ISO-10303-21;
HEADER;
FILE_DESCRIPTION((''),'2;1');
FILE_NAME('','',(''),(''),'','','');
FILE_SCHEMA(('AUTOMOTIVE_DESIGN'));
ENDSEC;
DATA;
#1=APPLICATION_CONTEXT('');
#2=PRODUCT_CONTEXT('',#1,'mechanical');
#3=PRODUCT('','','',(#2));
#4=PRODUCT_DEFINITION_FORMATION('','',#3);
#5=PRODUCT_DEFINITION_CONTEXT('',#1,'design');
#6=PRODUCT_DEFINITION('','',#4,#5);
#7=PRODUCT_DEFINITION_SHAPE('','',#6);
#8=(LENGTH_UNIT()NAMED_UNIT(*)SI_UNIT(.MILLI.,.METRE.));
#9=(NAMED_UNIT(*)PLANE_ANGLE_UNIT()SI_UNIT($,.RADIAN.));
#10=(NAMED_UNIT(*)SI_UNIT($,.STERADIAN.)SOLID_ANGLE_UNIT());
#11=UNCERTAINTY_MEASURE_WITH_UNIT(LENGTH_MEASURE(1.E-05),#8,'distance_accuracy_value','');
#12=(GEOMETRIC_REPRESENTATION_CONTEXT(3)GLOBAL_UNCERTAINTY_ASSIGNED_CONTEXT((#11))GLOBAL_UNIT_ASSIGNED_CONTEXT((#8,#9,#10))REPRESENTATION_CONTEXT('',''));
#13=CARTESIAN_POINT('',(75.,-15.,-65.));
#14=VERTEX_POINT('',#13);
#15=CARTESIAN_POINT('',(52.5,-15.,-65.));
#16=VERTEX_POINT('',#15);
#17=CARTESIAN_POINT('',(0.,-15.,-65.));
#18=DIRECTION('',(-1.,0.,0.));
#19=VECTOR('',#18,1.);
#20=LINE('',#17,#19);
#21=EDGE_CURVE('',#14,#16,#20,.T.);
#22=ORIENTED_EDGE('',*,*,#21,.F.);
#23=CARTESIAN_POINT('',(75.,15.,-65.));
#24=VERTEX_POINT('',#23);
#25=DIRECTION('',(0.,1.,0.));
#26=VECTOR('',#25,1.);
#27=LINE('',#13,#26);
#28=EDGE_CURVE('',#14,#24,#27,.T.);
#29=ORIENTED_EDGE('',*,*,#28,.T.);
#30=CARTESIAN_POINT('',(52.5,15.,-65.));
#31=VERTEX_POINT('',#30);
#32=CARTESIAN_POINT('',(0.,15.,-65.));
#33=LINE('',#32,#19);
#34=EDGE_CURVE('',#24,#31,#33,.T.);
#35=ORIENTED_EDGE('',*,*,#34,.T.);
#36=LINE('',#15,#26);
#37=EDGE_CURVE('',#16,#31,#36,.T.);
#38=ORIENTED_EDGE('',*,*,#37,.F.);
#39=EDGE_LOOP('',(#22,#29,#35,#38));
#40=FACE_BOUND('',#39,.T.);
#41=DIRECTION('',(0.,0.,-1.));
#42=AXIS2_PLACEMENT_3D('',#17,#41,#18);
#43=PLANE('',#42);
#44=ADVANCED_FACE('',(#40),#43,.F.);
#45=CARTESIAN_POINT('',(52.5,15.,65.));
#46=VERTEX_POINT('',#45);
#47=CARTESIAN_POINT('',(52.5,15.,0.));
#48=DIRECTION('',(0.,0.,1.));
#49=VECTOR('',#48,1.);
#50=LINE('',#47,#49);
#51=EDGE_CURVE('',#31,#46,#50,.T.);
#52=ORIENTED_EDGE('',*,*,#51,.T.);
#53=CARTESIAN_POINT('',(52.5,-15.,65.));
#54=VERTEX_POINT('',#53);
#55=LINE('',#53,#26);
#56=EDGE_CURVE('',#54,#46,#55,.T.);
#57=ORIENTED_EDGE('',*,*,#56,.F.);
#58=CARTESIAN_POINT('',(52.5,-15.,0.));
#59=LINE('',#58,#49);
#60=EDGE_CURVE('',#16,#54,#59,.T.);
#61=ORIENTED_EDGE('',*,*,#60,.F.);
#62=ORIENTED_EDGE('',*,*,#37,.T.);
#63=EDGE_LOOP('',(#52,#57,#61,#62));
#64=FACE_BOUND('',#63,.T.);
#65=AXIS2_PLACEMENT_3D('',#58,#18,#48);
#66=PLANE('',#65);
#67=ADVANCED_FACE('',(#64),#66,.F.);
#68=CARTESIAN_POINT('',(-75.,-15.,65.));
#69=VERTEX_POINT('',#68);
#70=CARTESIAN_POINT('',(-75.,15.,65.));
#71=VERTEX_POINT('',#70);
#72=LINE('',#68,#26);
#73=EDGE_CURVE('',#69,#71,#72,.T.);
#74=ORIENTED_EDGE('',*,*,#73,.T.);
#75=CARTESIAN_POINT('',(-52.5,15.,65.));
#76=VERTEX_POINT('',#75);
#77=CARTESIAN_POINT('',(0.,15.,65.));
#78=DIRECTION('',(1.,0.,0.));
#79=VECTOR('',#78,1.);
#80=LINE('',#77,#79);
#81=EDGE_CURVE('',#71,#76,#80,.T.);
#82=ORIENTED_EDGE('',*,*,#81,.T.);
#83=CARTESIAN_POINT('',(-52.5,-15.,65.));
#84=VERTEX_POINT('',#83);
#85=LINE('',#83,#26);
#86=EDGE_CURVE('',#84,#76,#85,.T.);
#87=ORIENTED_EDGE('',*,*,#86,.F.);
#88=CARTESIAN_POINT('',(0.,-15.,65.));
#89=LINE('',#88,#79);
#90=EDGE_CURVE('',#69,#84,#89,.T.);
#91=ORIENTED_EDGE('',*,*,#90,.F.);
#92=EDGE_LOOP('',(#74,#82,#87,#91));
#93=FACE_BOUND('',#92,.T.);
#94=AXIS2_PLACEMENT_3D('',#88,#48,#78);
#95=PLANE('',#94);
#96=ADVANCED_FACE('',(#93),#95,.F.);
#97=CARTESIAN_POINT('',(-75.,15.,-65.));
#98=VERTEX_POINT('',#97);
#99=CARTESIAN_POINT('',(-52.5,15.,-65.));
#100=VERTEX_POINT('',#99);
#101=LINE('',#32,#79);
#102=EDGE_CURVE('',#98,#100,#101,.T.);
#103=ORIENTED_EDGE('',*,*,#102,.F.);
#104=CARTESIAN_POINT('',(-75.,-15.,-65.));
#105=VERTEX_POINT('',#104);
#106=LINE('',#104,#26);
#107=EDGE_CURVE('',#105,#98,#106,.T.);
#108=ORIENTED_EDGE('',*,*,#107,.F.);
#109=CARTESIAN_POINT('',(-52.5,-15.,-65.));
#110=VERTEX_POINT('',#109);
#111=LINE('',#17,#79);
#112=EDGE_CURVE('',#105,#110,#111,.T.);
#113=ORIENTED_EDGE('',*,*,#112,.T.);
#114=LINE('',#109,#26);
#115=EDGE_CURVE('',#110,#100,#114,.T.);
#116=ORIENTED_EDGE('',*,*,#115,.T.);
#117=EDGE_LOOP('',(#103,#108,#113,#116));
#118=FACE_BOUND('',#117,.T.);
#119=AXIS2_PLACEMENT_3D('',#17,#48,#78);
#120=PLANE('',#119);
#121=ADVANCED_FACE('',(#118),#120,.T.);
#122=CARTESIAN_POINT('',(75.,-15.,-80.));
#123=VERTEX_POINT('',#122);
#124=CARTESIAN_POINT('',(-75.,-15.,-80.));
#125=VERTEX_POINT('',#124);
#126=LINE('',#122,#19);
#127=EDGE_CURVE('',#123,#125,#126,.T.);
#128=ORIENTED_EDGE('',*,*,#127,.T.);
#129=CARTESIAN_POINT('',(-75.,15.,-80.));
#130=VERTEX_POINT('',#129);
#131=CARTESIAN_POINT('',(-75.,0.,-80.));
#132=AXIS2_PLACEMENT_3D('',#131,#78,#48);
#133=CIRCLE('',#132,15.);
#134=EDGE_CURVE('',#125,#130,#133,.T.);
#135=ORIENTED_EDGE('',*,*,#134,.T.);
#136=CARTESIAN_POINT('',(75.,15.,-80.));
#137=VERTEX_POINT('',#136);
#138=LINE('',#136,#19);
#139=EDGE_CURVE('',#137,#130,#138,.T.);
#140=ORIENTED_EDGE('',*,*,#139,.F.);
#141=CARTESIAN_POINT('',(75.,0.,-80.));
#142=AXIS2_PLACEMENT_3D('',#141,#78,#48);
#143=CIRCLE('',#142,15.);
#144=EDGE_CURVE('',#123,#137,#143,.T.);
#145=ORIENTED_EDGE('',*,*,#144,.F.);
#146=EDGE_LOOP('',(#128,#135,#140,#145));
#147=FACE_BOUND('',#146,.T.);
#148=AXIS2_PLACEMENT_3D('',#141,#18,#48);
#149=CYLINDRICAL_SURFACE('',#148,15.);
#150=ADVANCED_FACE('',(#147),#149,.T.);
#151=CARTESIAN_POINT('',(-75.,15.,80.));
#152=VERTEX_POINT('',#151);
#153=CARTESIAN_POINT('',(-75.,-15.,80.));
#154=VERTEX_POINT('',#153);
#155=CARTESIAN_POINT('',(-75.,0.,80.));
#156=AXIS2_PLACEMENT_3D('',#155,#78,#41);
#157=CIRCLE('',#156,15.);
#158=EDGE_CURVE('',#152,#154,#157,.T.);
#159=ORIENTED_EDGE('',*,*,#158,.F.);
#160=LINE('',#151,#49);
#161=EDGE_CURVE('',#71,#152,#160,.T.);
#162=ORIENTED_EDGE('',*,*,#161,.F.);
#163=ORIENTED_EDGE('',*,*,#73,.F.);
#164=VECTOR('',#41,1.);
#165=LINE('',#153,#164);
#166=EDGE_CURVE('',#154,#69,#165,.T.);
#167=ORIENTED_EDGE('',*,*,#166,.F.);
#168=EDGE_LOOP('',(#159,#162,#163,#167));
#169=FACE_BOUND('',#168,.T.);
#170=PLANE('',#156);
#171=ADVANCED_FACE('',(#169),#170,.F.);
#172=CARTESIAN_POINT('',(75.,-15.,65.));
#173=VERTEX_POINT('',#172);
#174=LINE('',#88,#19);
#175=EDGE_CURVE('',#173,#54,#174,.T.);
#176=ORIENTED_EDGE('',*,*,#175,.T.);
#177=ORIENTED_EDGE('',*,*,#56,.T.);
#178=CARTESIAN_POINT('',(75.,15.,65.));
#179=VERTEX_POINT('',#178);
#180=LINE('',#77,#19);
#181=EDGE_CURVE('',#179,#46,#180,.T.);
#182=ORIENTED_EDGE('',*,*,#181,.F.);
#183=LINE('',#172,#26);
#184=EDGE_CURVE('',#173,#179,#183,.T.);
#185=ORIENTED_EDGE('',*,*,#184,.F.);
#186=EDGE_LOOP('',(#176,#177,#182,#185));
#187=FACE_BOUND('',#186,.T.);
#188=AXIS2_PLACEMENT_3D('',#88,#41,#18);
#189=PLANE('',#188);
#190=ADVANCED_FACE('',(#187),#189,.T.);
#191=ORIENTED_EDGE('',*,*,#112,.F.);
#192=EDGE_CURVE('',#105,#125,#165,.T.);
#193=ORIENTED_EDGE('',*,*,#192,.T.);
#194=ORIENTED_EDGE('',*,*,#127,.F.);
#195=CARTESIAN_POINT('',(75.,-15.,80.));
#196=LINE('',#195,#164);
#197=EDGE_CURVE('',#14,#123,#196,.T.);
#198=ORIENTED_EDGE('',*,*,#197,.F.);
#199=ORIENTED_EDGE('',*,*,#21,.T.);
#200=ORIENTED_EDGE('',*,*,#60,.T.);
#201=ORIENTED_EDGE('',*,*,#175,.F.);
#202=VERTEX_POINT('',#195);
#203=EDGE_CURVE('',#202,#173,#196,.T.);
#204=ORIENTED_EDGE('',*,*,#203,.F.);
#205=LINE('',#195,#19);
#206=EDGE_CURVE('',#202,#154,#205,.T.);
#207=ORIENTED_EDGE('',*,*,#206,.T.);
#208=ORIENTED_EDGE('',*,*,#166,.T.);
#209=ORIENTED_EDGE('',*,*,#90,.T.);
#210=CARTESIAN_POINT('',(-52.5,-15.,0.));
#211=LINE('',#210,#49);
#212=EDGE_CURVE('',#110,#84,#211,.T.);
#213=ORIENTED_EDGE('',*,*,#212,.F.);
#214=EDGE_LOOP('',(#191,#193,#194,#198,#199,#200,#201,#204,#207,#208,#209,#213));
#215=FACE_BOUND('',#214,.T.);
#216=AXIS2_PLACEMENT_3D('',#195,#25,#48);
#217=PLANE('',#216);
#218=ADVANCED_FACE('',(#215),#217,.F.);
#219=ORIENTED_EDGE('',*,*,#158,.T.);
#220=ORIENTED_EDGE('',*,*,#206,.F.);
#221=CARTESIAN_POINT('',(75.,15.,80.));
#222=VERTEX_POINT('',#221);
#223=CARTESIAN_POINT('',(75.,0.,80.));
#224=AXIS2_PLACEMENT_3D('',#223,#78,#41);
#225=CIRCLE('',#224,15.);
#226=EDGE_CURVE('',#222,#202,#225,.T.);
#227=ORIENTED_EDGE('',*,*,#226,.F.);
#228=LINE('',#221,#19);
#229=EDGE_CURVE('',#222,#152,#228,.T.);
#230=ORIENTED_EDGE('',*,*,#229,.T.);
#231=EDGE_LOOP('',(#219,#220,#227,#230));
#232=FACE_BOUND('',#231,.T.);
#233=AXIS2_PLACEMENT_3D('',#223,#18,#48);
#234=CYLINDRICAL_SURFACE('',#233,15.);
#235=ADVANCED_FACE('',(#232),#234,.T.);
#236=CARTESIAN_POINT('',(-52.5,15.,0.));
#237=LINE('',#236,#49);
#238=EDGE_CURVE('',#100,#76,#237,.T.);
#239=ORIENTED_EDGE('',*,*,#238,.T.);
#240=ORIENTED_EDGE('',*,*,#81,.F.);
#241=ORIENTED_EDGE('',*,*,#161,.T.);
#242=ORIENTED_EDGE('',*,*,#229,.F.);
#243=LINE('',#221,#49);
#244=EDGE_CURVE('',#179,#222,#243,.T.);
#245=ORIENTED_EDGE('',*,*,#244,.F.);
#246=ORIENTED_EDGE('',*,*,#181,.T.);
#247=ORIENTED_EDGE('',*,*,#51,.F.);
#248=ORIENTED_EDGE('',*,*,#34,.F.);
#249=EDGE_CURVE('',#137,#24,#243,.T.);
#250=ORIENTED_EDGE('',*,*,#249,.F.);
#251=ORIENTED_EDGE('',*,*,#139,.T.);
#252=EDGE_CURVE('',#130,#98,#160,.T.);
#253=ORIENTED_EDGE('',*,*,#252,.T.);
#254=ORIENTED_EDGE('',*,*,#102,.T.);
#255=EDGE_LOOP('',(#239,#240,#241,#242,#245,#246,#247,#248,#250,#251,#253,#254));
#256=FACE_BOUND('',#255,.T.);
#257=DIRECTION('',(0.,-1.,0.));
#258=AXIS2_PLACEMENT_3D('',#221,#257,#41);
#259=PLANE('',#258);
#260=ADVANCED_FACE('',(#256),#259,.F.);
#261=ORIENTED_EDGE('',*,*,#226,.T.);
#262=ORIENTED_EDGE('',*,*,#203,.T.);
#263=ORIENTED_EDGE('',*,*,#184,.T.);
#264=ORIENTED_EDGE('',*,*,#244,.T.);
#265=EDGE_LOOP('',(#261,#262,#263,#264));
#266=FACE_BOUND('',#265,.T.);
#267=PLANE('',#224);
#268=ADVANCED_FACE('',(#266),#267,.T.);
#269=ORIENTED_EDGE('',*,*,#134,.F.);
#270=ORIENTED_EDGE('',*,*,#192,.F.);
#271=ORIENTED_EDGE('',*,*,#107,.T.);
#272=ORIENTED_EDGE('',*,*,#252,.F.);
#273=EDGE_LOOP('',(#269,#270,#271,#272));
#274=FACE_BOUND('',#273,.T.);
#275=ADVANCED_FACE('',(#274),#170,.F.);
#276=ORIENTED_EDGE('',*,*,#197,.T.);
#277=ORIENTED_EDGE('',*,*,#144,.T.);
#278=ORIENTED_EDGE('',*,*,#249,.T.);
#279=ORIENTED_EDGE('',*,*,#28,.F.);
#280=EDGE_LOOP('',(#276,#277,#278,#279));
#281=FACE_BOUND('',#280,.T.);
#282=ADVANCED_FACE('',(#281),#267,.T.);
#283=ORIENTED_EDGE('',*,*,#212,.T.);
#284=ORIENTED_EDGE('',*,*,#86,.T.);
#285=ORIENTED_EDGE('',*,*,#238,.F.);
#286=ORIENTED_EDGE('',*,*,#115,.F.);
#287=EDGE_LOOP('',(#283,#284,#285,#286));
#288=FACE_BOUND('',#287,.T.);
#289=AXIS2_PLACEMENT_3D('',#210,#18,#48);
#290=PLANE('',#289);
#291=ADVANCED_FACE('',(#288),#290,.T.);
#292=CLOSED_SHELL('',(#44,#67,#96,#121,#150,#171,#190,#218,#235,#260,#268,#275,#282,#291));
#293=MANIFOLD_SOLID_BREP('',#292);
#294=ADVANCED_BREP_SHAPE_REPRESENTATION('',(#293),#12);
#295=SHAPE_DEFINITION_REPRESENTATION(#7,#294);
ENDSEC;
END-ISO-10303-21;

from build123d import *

# Parameters (mm, degrees)
AUFSATZ_LINEAR_AUSTRAGEN1_DEPTH = 75
SKIZZE5_OUTSIDE_W               = 200.786
SKIZZE5_OUTSIDE_H               = 240.786
SCHNITT_LINEAR_AUSTRAGEN5_DEPTH = 125.699639133


with BuildPart() as part:
    # Skizze1 → Aufsatz-Linear austragen1 (new, symmetric)
    with BuildSketch(Plane(origin=(0, 0, 0), x_dir=(0, 0, -1), z_dir=(1, 0, 0))):
        with BuildLine():
            Line((-80, -15), (80, -15))
            ThreePointArc((80, -15), (95, 0), (80, 15))
            Line((80, 15), (-80, 15))
            ThreePointArc((-80, 15), (-95, 0), (-80, -15))
        make_face()
    extrude(amount=AUFSATZ_LINEAR_AUSTRAGEN1_DEPTH, both=True)

    # Skizze5 outside → Schnitt-Linear austragen5 (cut, through all)
    with BuildSketch(Plane(origin=(0, 15, 0), x_dir=(1, 0, 0), z_dir=(0, 1, 0))):
        Rectangle(SKIZZE5_OUTSIDE_W, SKIZZE5_OUTSIDE_H)
        Polygon((75, 95), (-75, 95), (-75, 65), (-52.5, 65), (-52.5, -65), (-75, -65), (-75, -95), (75, -95), (75, -65), (52.5, -65), (52.5, 65), (75, 65), align=None, mode=Mode.SUBTRACT)
    extrude(amount=-SCHNITT_LINEAR_AUSTRAGEN5_DEPTH, mode=Mode.SUBTRACT)


solid = part.part
